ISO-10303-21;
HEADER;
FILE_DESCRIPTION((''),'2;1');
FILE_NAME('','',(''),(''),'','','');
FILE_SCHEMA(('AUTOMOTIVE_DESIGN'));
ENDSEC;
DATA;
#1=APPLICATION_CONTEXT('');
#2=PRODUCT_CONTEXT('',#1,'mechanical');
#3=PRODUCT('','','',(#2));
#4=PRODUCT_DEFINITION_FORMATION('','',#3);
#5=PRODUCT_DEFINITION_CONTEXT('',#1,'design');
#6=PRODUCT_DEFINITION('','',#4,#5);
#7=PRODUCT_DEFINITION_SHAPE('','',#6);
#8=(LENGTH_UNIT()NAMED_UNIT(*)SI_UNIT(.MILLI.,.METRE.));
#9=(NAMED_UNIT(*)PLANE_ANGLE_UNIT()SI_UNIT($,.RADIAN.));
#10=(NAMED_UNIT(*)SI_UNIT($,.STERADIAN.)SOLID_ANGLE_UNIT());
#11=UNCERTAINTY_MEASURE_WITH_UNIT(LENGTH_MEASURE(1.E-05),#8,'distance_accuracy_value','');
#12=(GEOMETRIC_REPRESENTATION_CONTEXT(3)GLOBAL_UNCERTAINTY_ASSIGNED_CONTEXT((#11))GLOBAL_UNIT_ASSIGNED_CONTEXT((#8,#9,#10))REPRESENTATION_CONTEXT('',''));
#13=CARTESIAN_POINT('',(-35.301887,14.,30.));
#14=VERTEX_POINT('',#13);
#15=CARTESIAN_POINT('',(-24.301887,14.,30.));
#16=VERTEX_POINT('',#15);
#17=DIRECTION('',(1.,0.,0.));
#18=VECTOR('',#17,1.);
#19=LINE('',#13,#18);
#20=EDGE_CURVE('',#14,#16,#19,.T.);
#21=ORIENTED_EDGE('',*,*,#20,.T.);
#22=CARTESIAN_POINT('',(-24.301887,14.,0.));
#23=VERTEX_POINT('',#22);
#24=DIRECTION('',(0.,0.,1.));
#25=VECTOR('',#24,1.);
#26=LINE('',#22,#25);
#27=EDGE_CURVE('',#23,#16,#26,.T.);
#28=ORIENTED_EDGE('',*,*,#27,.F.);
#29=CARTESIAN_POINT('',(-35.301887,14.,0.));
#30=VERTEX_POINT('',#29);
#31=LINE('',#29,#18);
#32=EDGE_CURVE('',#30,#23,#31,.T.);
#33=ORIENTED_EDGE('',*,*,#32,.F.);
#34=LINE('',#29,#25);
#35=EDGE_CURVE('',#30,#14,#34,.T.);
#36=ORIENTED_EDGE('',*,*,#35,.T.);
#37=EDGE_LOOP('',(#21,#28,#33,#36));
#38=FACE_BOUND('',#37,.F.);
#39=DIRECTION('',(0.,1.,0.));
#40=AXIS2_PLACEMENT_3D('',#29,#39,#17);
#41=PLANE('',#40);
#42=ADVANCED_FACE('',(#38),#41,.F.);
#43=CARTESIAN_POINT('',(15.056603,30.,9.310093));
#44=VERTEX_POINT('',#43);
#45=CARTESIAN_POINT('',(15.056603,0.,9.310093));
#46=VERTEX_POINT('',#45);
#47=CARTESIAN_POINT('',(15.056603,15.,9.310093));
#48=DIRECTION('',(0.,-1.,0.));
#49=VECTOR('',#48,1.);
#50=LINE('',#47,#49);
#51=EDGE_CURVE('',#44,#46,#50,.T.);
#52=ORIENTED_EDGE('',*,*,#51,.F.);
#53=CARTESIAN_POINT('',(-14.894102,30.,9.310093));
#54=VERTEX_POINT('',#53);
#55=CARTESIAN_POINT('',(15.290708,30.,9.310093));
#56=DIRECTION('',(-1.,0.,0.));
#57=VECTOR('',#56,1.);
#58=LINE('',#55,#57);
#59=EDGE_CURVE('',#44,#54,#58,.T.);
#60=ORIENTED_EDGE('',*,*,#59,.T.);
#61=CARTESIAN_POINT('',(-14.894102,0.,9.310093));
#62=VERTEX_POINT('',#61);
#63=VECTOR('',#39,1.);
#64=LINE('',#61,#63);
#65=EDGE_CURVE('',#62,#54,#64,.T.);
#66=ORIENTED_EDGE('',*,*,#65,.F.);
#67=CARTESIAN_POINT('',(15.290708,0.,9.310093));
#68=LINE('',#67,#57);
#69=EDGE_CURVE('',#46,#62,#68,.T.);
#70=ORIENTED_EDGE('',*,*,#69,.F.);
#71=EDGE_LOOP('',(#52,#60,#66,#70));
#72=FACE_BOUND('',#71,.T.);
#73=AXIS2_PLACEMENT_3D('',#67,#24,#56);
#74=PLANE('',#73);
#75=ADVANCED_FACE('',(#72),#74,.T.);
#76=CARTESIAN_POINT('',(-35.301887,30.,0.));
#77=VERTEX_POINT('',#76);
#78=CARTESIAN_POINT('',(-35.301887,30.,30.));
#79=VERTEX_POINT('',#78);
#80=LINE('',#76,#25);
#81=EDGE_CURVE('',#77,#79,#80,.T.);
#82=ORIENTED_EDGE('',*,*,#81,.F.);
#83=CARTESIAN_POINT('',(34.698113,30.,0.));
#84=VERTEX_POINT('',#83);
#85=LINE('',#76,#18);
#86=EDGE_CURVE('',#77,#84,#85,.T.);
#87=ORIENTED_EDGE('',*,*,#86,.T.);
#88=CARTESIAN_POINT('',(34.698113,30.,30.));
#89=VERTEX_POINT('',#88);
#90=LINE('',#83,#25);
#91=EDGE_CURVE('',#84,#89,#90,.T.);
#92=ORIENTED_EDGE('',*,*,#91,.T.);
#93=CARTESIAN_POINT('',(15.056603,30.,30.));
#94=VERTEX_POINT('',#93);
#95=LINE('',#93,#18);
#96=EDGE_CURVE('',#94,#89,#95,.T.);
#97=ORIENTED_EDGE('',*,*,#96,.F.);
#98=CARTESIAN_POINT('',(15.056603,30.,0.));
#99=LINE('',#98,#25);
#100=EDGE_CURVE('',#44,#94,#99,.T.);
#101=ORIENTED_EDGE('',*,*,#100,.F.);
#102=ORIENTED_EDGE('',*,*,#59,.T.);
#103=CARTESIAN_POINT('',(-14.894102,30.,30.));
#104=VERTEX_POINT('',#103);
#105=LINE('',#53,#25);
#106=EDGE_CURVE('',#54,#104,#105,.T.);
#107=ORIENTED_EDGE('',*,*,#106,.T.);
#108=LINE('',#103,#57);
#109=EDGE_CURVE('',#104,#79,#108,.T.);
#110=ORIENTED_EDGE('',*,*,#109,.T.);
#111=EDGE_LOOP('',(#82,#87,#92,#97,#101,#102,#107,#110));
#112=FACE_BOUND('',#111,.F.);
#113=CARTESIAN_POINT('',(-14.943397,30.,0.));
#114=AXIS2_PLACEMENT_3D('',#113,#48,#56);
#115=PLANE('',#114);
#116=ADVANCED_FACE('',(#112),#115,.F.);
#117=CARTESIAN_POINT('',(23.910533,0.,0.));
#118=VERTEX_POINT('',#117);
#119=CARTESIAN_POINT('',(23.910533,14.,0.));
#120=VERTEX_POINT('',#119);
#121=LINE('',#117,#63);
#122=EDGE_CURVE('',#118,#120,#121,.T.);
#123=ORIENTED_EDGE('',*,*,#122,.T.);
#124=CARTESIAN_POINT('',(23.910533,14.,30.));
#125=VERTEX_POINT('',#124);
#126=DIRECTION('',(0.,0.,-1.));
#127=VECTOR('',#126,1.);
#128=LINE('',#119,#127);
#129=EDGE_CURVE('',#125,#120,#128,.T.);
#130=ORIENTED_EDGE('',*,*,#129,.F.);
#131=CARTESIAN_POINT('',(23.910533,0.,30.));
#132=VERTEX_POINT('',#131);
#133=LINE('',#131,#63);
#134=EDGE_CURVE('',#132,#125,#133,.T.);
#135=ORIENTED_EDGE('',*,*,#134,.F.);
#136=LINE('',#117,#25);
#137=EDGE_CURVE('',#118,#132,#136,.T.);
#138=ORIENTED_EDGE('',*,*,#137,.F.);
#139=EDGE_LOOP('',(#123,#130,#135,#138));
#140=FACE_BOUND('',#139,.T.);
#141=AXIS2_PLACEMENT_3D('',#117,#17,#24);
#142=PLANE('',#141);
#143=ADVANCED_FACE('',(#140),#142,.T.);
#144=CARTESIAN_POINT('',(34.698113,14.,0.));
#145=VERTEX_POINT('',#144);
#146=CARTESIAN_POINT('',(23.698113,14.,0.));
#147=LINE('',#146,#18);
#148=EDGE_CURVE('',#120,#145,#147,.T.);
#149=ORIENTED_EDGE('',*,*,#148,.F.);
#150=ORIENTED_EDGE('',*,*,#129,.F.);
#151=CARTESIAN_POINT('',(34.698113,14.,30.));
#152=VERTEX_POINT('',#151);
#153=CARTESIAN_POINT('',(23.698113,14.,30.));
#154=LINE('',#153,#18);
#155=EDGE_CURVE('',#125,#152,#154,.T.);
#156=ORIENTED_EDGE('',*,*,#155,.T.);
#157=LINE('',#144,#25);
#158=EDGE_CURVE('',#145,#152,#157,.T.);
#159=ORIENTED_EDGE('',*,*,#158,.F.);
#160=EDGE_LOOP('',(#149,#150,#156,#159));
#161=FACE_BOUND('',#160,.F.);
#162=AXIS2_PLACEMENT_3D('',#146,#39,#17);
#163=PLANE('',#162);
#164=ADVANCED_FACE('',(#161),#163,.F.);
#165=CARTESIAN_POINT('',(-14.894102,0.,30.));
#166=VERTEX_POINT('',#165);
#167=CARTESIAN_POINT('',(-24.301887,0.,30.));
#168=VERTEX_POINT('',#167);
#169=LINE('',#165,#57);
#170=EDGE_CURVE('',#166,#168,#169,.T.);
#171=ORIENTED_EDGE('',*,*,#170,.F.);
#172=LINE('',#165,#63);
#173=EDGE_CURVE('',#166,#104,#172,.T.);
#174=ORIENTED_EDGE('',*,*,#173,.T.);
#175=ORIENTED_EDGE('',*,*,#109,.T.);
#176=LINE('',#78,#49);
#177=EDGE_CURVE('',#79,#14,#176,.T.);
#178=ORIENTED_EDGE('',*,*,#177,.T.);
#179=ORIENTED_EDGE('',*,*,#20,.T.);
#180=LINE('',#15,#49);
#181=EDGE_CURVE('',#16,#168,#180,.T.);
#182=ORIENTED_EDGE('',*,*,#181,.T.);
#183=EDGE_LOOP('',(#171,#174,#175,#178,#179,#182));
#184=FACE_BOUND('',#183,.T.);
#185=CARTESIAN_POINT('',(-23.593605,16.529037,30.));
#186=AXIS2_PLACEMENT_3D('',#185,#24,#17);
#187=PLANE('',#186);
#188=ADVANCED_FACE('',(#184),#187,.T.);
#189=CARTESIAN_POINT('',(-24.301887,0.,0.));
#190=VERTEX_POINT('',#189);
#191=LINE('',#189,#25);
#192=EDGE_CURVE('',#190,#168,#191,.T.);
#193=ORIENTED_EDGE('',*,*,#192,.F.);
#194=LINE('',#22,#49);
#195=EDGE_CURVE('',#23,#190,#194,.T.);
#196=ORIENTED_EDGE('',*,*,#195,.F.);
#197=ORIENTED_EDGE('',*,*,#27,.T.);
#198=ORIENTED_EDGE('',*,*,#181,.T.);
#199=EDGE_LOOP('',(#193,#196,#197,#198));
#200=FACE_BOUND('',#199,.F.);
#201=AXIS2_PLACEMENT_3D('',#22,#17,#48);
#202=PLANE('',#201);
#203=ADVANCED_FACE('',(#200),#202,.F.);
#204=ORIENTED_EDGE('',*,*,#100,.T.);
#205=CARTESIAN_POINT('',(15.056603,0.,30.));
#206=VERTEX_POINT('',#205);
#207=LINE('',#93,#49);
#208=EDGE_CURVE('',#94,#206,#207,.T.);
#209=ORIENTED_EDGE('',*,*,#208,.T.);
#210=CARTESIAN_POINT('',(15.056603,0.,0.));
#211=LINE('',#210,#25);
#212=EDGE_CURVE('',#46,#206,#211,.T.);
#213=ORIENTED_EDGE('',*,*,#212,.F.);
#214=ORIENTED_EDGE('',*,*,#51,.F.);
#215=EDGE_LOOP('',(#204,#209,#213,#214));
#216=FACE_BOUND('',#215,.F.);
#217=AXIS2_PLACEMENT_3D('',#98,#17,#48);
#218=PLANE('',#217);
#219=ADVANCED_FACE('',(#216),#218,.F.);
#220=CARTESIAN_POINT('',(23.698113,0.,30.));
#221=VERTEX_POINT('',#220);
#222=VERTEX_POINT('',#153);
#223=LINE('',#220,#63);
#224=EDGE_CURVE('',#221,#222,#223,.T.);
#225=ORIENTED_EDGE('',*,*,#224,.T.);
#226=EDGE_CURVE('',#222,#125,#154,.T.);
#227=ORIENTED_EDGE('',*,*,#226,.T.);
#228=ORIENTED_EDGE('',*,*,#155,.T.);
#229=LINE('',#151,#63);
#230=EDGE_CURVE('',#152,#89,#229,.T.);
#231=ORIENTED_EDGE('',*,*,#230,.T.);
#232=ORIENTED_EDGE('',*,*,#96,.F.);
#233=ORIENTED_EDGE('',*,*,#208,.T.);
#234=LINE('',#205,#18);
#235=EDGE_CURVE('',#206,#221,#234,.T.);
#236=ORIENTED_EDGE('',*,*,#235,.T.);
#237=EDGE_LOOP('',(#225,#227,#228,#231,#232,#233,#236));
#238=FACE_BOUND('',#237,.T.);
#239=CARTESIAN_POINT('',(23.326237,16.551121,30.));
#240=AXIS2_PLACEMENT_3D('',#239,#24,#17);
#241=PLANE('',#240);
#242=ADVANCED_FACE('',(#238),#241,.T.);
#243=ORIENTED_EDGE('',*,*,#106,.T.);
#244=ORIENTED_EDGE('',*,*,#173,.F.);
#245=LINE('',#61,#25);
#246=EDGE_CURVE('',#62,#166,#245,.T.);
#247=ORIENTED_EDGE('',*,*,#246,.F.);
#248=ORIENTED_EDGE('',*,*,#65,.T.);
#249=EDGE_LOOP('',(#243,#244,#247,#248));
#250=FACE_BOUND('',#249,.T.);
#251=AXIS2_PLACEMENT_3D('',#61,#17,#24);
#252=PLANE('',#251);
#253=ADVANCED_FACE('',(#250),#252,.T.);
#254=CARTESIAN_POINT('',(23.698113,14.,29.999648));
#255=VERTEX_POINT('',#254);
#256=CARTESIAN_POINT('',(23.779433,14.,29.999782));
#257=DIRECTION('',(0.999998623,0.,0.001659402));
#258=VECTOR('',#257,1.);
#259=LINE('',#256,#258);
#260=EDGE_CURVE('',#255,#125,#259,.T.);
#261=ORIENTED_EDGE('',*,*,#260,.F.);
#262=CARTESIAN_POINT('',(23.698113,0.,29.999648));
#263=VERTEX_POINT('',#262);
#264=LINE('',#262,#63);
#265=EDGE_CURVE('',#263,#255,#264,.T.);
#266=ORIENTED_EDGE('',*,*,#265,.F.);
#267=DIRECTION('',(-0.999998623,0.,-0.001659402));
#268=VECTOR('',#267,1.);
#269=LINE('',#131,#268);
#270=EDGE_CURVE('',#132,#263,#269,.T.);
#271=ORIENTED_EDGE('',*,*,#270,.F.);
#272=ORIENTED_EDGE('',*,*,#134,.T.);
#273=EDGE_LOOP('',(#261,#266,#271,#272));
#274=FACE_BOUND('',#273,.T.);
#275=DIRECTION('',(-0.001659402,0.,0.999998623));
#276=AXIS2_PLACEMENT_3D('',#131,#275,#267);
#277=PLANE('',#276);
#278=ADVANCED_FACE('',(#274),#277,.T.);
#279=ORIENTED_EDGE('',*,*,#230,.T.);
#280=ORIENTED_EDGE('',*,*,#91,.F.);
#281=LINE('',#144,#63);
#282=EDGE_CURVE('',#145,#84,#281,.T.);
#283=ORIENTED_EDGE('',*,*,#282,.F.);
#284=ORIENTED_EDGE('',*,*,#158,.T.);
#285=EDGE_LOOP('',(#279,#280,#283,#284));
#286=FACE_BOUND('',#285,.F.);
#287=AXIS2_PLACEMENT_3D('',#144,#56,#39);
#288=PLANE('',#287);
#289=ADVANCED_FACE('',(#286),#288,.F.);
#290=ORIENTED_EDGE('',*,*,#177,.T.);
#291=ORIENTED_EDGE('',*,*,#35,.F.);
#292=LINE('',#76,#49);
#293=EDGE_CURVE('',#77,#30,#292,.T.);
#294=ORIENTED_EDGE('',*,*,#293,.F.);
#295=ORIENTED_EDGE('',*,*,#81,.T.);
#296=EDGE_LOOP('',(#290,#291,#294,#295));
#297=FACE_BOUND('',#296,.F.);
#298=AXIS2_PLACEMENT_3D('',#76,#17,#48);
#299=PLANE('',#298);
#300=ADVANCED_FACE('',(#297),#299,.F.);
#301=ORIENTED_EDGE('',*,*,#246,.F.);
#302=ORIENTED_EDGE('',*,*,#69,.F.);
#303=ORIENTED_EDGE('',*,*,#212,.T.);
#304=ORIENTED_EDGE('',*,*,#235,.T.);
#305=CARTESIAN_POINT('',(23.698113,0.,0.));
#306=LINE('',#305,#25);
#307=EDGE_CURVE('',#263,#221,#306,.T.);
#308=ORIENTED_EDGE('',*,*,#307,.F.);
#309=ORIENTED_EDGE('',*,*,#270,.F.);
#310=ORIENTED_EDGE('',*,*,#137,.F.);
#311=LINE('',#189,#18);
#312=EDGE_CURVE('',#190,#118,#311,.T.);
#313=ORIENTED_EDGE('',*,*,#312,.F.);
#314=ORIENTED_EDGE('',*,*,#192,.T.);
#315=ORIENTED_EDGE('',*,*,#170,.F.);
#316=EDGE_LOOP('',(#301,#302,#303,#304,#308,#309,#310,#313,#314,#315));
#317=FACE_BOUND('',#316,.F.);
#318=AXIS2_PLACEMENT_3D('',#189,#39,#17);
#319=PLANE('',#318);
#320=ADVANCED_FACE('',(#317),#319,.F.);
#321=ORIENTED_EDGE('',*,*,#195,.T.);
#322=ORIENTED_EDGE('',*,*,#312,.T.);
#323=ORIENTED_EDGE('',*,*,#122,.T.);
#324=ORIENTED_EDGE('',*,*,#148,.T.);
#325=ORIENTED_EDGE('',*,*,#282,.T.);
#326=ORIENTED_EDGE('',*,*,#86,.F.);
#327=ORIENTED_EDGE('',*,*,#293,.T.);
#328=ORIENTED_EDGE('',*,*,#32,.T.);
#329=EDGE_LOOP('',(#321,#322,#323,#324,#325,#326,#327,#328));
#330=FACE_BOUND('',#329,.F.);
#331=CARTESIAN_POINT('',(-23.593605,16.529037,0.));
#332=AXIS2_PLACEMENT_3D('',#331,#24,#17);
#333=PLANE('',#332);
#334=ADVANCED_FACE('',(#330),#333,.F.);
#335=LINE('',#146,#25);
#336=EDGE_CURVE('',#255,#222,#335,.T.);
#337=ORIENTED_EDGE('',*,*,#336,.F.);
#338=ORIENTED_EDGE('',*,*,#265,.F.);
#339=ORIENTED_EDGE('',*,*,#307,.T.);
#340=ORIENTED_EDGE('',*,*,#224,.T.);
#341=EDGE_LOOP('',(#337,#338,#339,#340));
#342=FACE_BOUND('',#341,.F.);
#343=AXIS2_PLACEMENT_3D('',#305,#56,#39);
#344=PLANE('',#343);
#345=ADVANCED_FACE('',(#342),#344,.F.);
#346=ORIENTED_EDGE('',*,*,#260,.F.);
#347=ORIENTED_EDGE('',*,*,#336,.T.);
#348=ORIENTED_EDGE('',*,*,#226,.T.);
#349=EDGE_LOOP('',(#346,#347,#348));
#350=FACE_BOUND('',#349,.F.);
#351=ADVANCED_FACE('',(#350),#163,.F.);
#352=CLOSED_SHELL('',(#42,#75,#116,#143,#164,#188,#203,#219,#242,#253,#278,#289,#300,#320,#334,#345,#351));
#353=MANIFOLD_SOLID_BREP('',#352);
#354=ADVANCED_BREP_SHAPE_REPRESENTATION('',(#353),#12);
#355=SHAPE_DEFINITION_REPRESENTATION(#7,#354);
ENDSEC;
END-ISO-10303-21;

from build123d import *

# Parameters (mm, degrees)
F1_DEPTH = 30
F3_DEPTH = 30


# Not quite as in the source:
# - a feature of the source that left no trace in its solid (it failed there, or was rolled back) is left out


with BuildPart() as f1:
    # F0 (on Top) → F1 (new body)
    with BuildSketch(Plane.XY):
        Polygon((-24.3018865001, 0), (-19.4716978501, 0), (-14.9433972497, 0), (-14.9433972497, 30), (-35.3018865001, 30), (-35.3018865001, 14), (-24.3018865001, 14), align=None)
    extrude(amount=F1_DEPTH)



with BuildPart() as f1b:
    # F0 (on Top) → F1, piece 2 (new body)
    with BuildSketch(Plane.XY):
        Polygon((34.6981134999, 30), (15.0566027503, 30), (15.0566027503, 0), (23.6981134999, 0), (23.6981134999, 14), (34.6981134999, 14), align=None)
    extrude(amount=F1_DEPTH)


with BuildPart() as f1_1:
    add(f1.part)

    add(f1b.part)  # F3 merges F1b
    # F2 (on Front) → F3 (join)
    with BuildSketch(Plane.XZ):
        Polygon((-24.0894670747, 0), (23.9105329253, 0), (23.9105329253, 30), (15.2907075817, 29.9856962232), (15.2907075817, 9.3100926116), (-14.8941018885, 9.3100926116), (-14.8941018885, 30), (-24.0894670747, 30), align=None)
    extrude(amount=-F3_DEPTH)


solid = f1_1.part
